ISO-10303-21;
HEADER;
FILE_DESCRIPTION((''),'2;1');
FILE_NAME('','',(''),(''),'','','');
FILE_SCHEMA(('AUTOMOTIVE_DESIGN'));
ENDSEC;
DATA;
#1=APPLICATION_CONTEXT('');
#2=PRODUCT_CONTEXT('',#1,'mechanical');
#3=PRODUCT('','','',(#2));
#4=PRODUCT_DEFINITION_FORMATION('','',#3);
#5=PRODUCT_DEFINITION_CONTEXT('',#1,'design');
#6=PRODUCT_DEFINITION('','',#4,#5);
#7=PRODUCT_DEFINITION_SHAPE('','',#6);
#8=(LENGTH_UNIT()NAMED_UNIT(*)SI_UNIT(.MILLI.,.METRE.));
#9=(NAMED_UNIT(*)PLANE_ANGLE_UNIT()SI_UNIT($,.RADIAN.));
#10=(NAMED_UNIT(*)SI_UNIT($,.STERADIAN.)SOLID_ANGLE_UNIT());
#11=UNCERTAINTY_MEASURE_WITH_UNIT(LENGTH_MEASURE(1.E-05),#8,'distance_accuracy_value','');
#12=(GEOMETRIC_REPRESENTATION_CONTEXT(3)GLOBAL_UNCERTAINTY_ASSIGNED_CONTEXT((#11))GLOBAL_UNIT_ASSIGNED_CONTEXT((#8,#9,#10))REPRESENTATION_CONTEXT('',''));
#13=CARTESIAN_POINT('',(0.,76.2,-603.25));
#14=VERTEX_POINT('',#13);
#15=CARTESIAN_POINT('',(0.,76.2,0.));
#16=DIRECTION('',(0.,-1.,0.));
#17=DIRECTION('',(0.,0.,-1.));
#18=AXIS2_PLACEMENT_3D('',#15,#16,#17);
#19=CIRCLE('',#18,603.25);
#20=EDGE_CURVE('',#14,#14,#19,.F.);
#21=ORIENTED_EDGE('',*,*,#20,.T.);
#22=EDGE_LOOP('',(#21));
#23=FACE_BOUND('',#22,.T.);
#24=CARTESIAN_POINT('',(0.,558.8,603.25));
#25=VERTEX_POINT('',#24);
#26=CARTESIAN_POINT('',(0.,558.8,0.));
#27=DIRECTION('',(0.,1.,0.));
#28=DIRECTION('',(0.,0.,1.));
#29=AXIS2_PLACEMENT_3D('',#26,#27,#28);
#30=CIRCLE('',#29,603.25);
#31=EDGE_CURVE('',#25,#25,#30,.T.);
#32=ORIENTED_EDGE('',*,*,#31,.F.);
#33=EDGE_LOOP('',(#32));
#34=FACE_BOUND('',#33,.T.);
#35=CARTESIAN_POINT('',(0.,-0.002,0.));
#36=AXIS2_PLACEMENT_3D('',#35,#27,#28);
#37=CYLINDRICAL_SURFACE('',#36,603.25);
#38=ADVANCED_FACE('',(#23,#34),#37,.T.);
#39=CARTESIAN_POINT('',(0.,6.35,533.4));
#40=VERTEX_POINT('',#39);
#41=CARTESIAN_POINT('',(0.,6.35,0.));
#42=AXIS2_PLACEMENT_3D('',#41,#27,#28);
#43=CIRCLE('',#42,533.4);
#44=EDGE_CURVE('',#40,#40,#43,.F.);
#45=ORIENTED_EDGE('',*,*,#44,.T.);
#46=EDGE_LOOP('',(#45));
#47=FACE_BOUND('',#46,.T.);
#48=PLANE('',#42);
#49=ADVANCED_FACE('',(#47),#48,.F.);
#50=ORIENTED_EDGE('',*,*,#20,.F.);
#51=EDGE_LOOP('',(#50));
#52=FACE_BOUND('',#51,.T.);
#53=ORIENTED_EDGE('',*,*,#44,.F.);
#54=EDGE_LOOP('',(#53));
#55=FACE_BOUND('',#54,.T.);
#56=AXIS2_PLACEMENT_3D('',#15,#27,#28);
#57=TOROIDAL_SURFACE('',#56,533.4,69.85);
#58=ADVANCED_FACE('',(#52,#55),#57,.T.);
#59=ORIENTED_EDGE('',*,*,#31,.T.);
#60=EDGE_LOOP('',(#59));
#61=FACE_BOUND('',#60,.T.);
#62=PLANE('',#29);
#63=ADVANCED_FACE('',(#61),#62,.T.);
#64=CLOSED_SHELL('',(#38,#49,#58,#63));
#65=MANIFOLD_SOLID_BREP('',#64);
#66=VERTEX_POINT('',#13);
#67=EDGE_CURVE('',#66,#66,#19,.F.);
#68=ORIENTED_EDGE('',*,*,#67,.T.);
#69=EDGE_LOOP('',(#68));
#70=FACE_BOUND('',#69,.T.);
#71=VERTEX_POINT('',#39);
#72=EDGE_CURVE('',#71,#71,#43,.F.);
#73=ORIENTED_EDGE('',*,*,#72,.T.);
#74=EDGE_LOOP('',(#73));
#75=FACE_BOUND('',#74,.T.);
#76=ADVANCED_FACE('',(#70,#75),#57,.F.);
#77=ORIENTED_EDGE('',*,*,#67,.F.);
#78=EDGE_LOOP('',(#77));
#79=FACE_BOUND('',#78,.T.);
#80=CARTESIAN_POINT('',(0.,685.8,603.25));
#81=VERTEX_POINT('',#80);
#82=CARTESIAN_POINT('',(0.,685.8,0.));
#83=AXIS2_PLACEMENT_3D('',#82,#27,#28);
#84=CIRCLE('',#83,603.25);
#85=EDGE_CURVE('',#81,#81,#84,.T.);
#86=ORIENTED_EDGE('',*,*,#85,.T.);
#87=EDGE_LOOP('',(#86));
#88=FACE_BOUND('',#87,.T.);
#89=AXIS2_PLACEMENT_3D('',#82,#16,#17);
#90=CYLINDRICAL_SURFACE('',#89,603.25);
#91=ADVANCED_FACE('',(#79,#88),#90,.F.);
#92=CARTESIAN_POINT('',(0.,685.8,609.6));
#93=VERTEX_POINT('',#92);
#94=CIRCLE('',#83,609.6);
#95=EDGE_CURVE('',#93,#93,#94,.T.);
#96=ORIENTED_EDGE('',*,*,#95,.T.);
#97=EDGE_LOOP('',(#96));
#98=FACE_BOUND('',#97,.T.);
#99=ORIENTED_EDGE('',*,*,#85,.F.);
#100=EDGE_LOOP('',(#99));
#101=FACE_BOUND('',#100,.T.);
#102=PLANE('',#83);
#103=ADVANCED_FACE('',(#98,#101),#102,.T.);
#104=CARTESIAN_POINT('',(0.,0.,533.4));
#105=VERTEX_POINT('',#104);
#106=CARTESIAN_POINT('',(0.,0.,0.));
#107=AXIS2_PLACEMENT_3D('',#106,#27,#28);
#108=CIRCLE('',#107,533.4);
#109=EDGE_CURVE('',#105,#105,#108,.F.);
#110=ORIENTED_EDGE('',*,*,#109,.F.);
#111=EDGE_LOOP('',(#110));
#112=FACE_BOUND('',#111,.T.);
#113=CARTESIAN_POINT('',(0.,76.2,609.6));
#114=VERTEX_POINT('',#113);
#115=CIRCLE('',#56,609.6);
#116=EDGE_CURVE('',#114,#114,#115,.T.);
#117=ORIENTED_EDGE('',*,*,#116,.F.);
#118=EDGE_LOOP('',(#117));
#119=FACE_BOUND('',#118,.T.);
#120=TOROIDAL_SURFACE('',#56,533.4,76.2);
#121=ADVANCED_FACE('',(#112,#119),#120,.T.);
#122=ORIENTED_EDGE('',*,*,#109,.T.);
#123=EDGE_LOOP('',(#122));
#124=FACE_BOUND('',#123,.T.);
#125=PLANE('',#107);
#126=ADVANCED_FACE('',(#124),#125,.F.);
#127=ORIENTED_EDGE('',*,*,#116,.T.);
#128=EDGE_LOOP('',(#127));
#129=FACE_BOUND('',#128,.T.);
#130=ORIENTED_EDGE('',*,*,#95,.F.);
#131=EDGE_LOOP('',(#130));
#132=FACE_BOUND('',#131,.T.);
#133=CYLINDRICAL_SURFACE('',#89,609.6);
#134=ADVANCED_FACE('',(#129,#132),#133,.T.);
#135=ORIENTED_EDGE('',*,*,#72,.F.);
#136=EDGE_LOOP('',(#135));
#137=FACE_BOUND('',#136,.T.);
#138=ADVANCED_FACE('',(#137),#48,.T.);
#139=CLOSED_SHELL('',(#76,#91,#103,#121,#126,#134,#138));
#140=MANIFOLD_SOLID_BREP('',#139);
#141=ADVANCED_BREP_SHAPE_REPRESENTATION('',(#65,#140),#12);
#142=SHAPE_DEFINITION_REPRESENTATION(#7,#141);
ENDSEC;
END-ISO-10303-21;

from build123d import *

# Parameters (mm, degrees)
SKETCH1_R           = 609.6
BOSS_EXTRUDE1_DEPTH = 685.8
FILLET1_R           = 76.2
SHELL1_T            = -6.35


# Read off the part's stored shape, not the designer's step: Boss-Extrude2
with BuildPart() as part:
    # Sketch1 → Boss-Extrude1 (new body)
    with BuildSketch(Plane(origin=(0, 0, 0), x_dir=(1, 0, 0), z_dir=(0, 1, 0))):
        with Locations(Location((0, 0, 0), (0, 0, 270))):
            Circle(SKETCH1_R)
    extrude(amount=BOSS_EXTRUDE1_DEPTH)

    # Fillet1
    fillet1_edges = [part.edges().sort_by_distance(p)[0] for p in [
        (0, 0, -609.6),
    ]]
    fillet(fillet1_edges, radius=FILLET1_R)

    # Shell1
    shell1_openings = [part.faces().sort_by_distance(p)[0] for p in [
        (0, 685.8, 0),
    ]]
    offset(amount=SHELL1_T, openings=shell1_openings, kind=Kind.INTERSECTION)


with BuildPart() as body_2:
    # Boss-Extrude2 outline → Boss-Extrude2 (revolve)
    with BuildSketch(Plane.XY):
        with BuildLine():
            Line((0, 558.8), (0, 6.35))
            Line((0, 6.35), (533.4, 6.35))
            ThreePointArc((533.4, 6.35), (582.791408666, 26.808591334), (603.25, 76.2))
            Line((603.25, 76.2), (603.25, 558.8))
            Line((603.25, 558.8), (0, 558.8))
        make_face()
    revolve(axis=Axis((0, 0, 0), (0, 1, 0)))


solid = Compound([part.part, body_2.part])
